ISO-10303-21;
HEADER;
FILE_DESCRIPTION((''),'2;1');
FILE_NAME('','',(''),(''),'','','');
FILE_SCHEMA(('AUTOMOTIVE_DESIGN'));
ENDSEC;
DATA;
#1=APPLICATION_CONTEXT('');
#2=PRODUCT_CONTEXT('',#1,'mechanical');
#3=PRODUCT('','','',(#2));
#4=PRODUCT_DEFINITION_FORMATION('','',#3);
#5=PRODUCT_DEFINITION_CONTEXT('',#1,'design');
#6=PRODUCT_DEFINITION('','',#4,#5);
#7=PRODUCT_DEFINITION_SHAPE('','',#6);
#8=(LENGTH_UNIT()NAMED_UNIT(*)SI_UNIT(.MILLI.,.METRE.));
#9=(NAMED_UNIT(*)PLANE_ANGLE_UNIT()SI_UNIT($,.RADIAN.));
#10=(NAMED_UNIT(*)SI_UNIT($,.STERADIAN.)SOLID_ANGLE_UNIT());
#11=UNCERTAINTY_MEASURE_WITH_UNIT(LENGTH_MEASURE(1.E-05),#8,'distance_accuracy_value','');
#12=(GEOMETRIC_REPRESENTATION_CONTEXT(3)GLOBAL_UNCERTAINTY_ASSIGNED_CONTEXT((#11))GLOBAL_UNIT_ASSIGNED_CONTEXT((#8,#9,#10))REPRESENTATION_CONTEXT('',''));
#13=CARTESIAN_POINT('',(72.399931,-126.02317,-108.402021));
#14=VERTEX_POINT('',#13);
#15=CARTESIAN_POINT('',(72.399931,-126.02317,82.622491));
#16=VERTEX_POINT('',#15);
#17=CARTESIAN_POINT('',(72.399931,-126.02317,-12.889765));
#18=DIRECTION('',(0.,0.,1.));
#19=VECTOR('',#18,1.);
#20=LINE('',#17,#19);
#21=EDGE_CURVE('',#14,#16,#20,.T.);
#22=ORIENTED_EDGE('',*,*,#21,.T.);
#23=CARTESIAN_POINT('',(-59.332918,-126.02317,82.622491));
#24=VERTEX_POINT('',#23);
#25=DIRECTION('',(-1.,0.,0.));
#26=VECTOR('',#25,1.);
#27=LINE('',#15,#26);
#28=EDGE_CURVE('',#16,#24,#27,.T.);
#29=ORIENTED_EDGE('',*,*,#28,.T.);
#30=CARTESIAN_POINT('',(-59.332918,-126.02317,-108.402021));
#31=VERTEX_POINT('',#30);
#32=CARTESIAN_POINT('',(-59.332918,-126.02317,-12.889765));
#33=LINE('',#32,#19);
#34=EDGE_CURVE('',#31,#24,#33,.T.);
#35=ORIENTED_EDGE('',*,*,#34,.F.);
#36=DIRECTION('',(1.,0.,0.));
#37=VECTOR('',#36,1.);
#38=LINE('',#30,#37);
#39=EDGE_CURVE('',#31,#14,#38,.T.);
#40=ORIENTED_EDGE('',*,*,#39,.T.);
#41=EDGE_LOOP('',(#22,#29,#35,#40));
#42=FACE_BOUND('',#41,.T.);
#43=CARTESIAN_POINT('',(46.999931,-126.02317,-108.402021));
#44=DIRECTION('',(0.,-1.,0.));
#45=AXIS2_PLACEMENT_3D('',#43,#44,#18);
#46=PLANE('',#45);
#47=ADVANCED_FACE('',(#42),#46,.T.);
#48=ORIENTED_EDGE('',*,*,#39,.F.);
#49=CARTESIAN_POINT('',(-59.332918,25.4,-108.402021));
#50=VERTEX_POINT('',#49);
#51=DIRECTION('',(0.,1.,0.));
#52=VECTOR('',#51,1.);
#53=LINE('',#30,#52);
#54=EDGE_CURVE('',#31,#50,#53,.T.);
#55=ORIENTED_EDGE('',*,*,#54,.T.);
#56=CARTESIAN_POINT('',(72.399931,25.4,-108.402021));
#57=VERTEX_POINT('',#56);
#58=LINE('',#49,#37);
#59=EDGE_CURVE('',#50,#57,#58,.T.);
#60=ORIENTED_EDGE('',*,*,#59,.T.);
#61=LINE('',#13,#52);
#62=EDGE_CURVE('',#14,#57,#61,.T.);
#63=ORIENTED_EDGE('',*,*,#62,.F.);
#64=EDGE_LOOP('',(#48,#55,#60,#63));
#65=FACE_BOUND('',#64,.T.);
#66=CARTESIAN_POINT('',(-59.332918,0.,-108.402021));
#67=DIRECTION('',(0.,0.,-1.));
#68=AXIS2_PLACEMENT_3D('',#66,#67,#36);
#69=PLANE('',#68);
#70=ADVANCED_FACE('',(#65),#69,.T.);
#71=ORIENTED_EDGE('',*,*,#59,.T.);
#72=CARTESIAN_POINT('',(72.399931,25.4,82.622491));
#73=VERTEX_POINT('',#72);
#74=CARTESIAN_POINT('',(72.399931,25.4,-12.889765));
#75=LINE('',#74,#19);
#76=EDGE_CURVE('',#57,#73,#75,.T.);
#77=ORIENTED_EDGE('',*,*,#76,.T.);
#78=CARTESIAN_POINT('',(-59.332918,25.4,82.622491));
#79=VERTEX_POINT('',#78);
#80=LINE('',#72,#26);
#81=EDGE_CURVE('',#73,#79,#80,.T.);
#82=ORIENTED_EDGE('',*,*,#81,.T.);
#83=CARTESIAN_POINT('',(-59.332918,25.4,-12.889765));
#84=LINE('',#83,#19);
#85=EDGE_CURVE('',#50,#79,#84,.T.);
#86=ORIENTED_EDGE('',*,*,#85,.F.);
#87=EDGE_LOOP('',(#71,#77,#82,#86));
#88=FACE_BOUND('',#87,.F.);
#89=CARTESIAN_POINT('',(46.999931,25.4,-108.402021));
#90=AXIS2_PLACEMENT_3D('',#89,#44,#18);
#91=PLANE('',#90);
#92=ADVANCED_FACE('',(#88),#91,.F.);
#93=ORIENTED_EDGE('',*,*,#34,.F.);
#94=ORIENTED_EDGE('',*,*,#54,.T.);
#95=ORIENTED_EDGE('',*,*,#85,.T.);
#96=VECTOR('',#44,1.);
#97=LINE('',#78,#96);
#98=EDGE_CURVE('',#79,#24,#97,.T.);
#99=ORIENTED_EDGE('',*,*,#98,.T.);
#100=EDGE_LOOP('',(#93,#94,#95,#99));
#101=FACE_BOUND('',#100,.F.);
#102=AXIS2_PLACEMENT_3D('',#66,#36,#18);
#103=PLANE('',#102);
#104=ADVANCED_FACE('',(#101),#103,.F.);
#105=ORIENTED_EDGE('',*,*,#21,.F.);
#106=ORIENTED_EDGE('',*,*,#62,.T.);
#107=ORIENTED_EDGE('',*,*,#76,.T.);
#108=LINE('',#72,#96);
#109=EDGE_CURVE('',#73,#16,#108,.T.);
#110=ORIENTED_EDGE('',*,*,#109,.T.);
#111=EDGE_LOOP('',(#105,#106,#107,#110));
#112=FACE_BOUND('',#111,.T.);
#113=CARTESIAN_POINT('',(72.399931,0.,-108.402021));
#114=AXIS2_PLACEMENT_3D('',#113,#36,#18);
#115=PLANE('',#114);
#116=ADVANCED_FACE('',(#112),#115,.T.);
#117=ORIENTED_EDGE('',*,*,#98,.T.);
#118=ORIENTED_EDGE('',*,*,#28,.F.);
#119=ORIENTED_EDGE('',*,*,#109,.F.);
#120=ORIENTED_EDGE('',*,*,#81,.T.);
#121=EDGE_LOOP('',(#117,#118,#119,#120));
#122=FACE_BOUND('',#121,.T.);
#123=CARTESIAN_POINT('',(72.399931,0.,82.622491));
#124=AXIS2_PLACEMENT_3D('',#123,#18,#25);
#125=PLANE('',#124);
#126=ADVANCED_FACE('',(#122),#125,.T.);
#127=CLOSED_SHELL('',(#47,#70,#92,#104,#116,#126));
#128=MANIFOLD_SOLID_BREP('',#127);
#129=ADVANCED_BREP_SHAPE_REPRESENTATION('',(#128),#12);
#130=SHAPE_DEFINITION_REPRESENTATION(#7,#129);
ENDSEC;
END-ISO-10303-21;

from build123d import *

# Parameters (mm, degrees)
F0_W     = 106.3328497112
F0_H     = 191.0245120525
F1_DEPTH = 25.4
F5_DEPTH = 100.6231699139
F2_DEPTH = 25.4
F3_DEPTH = 25.4


# Not quite as in the source:
# - the program builds the solid bodies; features that only make, move or delete a surface that nothing else refers to are left out


with BuildPart() as f1:
    # F0 (on Front) → F1 (new body)
    with BuildSketch(Plane.XZ):
        with Locations((-6.1664935201, -12.889765203)):
            Rectangle(F0_W, F0_H)
    extrude(amount=F1_DEPTH)

    # F5 (add): a face of the model
    f5_faces = [f1.faces().sort_by_distance(p)[0] for p in [
        (-6.1664935201, -25.4, -12.889765203),
    ]]
    extrude(f5_faces, amount=F5_DEPTH)

    # F2 (add): a face of the model
    f2_faces = [f1.faces().sort_by_distance(p)[0] for p in [
        (46.9999313354, -63.0115849569, -12.889765203),
    ]]
    extrude(f2_faces, amount=F2_DEPTH)

    # F3 (add): a face of the model
    f3_faces = [f1.faces().sort_by_distance(p)[0] for p in [
        (6.5335064799, 0, -12.889765203),
    ]]
    extrude(f3_faces, amount=F3_DEPTH)


solid = f1.part
